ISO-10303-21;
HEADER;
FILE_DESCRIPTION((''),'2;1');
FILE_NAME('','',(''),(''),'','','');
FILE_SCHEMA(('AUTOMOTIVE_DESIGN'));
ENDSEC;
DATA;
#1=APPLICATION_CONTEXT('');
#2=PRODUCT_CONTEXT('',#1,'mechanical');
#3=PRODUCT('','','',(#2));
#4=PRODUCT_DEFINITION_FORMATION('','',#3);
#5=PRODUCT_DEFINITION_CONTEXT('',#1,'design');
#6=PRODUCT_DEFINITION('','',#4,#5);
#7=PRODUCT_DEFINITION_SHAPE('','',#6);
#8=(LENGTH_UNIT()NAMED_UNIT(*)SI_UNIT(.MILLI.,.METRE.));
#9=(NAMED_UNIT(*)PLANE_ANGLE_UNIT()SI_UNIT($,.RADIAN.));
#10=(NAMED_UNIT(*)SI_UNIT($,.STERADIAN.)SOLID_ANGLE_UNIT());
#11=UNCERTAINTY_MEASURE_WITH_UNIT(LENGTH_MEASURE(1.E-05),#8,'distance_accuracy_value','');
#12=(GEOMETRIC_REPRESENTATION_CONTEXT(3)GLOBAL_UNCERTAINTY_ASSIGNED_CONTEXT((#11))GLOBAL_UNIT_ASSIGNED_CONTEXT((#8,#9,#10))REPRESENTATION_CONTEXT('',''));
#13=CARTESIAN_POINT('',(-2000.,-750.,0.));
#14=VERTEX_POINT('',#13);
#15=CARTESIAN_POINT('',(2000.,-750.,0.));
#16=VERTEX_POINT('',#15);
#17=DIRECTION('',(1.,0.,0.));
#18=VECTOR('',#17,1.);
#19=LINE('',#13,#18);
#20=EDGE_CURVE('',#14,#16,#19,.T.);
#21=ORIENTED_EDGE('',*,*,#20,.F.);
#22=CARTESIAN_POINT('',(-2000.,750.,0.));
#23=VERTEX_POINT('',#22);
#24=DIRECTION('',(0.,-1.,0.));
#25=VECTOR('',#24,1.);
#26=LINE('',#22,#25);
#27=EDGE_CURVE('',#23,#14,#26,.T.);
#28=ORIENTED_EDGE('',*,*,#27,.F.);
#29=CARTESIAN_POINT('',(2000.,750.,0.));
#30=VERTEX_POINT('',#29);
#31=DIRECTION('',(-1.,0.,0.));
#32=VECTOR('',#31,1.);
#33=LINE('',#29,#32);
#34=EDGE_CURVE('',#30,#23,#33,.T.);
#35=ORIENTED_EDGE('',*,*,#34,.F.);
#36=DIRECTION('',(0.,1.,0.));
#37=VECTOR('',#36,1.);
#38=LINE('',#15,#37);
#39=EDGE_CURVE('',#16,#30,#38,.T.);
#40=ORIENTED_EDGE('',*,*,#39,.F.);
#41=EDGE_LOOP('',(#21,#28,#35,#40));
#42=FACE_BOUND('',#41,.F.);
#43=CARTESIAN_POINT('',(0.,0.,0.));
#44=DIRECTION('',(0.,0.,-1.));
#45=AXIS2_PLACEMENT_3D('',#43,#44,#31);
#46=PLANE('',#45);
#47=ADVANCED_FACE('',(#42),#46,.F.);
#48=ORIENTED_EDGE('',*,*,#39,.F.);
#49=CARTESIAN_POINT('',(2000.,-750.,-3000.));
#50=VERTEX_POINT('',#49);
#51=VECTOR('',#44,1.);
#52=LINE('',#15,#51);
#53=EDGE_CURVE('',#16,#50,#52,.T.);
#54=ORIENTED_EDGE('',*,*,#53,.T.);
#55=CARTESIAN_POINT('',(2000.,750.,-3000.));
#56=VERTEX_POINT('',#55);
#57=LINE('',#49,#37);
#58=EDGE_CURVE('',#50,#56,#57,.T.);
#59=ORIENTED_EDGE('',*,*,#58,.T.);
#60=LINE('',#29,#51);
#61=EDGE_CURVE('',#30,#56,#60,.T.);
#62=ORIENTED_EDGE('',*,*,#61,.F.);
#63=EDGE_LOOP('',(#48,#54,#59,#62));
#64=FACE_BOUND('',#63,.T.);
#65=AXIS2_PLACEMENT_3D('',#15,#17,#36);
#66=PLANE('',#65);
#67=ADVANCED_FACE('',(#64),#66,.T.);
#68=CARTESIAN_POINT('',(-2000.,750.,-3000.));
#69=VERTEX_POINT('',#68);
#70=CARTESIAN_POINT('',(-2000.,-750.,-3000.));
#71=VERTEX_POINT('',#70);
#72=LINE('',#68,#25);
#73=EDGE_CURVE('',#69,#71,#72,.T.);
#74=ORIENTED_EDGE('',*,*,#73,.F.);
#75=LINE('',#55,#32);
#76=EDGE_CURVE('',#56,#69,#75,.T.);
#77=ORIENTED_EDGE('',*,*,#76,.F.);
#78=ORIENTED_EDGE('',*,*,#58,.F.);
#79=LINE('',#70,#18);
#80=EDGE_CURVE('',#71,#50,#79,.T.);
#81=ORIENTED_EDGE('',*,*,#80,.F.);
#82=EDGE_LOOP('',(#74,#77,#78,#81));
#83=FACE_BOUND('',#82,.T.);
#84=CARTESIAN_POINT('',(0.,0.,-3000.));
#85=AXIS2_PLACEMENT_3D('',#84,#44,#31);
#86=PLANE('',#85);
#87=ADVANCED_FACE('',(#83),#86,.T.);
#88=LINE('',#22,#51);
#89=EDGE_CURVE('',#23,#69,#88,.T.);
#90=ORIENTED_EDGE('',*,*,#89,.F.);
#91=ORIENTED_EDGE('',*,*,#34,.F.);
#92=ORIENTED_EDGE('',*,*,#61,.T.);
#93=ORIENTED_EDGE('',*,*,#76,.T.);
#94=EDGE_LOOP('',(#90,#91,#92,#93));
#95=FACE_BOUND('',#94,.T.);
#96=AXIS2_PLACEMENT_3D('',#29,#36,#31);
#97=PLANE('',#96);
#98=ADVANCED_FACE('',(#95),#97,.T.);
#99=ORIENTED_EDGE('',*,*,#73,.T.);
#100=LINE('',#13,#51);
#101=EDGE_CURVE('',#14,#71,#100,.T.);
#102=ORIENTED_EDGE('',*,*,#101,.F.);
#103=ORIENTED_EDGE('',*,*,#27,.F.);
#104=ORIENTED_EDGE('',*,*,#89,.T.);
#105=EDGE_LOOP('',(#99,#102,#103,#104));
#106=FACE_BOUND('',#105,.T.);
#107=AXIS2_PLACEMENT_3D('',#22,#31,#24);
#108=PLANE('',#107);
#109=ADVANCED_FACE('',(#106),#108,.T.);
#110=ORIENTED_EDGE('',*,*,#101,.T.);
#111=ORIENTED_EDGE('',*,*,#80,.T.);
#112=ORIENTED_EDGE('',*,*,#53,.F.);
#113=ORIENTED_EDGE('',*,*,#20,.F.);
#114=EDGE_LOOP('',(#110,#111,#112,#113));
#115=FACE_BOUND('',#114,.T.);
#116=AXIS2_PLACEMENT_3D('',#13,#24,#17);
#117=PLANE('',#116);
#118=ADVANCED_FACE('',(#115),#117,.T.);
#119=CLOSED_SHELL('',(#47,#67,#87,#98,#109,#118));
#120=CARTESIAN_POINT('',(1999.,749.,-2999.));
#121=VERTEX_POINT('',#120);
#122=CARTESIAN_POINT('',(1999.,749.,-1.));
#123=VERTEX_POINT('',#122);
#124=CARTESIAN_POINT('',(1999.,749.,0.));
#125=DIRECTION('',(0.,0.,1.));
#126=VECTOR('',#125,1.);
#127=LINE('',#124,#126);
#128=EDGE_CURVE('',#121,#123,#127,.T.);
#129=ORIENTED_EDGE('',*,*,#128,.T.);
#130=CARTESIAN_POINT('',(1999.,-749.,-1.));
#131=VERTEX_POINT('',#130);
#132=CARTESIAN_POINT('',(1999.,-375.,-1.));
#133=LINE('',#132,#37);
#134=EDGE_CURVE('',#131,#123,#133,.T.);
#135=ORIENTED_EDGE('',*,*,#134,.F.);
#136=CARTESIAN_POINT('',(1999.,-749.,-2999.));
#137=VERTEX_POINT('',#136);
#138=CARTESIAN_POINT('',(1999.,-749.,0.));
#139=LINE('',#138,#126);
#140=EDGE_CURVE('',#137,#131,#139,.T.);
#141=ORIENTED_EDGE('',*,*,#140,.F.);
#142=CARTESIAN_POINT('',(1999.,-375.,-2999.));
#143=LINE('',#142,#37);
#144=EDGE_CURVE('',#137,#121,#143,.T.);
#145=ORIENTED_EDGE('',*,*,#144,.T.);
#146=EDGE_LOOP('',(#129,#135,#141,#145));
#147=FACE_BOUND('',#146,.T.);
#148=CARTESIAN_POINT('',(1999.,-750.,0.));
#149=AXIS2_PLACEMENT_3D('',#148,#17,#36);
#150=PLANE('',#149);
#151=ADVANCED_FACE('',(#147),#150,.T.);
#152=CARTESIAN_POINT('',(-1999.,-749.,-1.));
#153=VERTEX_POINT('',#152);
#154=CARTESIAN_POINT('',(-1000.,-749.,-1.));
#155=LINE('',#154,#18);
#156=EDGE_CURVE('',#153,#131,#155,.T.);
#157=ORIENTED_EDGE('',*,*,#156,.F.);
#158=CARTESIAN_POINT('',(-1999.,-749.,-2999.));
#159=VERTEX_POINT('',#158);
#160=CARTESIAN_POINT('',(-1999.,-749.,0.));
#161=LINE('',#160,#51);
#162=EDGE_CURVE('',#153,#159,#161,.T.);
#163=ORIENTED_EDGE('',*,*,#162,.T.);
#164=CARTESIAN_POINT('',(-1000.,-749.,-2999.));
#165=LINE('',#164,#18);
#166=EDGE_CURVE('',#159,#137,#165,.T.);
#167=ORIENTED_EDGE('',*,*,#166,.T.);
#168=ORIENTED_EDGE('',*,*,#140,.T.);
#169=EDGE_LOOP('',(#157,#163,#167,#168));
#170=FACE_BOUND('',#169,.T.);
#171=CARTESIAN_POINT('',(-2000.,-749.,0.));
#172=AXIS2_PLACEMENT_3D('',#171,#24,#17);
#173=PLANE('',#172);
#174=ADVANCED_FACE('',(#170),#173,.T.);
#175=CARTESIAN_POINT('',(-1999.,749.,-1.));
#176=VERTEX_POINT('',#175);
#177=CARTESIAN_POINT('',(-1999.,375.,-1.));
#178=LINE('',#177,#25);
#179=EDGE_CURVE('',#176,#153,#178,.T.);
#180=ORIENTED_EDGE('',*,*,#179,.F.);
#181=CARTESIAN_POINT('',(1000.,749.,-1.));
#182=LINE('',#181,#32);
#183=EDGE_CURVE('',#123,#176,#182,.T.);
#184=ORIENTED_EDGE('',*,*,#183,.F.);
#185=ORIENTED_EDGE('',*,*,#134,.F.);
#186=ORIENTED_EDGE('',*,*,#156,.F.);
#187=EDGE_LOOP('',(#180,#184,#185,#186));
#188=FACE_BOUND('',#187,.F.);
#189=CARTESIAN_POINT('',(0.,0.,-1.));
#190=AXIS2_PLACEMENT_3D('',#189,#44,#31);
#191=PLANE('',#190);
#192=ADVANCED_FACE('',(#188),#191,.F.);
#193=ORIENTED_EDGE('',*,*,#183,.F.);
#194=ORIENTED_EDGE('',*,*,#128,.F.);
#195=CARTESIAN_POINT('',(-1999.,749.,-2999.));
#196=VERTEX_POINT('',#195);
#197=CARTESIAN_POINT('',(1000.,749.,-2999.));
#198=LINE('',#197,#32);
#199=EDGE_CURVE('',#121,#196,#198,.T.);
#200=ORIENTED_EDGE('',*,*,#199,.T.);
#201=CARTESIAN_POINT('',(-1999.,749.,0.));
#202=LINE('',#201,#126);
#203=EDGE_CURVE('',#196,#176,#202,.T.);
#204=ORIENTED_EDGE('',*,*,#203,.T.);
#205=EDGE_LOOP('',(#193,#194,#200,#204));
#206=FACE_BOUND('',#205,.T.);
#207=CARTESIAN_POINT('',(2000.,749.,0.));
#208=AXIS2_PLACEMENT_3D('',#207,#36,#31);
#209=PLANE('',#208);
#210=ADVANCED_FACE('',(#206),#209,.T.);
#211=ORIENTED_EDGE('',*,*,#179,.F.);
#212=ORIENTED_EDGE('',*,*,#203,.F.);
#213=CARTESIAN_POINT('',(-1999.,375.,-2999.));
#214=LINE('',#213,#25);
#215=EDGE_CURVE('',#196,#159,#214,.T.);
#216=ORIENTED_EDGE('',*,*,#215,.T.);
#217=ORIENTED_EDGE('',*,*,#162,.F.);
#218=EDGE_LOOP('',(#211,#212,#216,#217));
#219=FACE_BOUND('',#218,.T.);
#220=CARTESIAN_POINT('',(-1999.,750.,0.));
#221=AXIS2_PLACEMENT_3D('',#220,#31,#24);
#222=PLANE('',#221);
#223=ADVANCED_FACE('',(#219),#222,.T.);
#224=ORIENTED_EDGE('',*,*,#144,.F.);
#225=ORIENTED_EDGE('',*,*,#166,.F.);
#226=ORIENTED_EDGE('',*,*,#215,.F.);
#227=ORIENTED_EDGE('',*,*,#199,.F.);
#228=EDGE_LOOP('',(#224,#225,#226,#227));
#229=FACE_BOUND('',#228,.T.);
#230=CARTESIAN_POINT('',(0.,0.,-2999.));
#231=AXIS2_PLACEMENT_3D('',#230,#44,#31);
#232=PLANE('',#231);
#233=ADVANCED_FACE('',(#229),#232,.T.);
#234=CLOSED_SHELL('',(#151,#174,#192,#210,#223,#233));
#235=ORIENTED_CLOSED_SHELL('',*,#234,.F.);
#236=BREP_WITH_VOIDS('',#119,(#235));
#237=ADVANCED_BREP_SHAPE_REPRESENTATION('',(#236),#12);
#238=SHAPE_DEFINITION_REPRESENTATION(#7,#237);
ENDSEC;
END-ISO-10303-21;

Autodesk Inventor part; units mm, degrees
ref_plane "YZ Plane" through (0, 0, 0) normal (1, 0, 0) x (0, 1, 0)
ref_plane "XZ Plane" through (0, 0, 0) normal (0, 1, 0) x (-1, 0, 0)
ref_plane "XY Plane" through (0, 0, 0) normal (0, 0, 1) x (1, 0, 0)
ref_plane "Work Plane1" through (0, 0, 0) normal (0, 0, -1) x (-1, 0, 0)
sketch "Sketch1" plane through (0, 0, 0) normal (0, 0, -1) x (-1, 0, 0)
  line L0 (2000, -750) -> (-2000, -750)
  line L1 (-2000, -750) -> (-2000, 750)
  line L2 (-2000, 750) -> (2000, 750)
  line L3 (2000, 750) -> (2000, -750)
  line L4 (2000, -750) -> (-2000, 750) construction
  line L5 (-2000, -750) -> (2000, 750) construction
  point P0 (0, 0)
  dimension "d0" = 4000
  dimension "d1" = 1500
extrude "Extrusion1" add sketch "Sketch1" along normal blind 3000
shell "Shell1" thickness 1 removed faces 0
properties part number "CV"
